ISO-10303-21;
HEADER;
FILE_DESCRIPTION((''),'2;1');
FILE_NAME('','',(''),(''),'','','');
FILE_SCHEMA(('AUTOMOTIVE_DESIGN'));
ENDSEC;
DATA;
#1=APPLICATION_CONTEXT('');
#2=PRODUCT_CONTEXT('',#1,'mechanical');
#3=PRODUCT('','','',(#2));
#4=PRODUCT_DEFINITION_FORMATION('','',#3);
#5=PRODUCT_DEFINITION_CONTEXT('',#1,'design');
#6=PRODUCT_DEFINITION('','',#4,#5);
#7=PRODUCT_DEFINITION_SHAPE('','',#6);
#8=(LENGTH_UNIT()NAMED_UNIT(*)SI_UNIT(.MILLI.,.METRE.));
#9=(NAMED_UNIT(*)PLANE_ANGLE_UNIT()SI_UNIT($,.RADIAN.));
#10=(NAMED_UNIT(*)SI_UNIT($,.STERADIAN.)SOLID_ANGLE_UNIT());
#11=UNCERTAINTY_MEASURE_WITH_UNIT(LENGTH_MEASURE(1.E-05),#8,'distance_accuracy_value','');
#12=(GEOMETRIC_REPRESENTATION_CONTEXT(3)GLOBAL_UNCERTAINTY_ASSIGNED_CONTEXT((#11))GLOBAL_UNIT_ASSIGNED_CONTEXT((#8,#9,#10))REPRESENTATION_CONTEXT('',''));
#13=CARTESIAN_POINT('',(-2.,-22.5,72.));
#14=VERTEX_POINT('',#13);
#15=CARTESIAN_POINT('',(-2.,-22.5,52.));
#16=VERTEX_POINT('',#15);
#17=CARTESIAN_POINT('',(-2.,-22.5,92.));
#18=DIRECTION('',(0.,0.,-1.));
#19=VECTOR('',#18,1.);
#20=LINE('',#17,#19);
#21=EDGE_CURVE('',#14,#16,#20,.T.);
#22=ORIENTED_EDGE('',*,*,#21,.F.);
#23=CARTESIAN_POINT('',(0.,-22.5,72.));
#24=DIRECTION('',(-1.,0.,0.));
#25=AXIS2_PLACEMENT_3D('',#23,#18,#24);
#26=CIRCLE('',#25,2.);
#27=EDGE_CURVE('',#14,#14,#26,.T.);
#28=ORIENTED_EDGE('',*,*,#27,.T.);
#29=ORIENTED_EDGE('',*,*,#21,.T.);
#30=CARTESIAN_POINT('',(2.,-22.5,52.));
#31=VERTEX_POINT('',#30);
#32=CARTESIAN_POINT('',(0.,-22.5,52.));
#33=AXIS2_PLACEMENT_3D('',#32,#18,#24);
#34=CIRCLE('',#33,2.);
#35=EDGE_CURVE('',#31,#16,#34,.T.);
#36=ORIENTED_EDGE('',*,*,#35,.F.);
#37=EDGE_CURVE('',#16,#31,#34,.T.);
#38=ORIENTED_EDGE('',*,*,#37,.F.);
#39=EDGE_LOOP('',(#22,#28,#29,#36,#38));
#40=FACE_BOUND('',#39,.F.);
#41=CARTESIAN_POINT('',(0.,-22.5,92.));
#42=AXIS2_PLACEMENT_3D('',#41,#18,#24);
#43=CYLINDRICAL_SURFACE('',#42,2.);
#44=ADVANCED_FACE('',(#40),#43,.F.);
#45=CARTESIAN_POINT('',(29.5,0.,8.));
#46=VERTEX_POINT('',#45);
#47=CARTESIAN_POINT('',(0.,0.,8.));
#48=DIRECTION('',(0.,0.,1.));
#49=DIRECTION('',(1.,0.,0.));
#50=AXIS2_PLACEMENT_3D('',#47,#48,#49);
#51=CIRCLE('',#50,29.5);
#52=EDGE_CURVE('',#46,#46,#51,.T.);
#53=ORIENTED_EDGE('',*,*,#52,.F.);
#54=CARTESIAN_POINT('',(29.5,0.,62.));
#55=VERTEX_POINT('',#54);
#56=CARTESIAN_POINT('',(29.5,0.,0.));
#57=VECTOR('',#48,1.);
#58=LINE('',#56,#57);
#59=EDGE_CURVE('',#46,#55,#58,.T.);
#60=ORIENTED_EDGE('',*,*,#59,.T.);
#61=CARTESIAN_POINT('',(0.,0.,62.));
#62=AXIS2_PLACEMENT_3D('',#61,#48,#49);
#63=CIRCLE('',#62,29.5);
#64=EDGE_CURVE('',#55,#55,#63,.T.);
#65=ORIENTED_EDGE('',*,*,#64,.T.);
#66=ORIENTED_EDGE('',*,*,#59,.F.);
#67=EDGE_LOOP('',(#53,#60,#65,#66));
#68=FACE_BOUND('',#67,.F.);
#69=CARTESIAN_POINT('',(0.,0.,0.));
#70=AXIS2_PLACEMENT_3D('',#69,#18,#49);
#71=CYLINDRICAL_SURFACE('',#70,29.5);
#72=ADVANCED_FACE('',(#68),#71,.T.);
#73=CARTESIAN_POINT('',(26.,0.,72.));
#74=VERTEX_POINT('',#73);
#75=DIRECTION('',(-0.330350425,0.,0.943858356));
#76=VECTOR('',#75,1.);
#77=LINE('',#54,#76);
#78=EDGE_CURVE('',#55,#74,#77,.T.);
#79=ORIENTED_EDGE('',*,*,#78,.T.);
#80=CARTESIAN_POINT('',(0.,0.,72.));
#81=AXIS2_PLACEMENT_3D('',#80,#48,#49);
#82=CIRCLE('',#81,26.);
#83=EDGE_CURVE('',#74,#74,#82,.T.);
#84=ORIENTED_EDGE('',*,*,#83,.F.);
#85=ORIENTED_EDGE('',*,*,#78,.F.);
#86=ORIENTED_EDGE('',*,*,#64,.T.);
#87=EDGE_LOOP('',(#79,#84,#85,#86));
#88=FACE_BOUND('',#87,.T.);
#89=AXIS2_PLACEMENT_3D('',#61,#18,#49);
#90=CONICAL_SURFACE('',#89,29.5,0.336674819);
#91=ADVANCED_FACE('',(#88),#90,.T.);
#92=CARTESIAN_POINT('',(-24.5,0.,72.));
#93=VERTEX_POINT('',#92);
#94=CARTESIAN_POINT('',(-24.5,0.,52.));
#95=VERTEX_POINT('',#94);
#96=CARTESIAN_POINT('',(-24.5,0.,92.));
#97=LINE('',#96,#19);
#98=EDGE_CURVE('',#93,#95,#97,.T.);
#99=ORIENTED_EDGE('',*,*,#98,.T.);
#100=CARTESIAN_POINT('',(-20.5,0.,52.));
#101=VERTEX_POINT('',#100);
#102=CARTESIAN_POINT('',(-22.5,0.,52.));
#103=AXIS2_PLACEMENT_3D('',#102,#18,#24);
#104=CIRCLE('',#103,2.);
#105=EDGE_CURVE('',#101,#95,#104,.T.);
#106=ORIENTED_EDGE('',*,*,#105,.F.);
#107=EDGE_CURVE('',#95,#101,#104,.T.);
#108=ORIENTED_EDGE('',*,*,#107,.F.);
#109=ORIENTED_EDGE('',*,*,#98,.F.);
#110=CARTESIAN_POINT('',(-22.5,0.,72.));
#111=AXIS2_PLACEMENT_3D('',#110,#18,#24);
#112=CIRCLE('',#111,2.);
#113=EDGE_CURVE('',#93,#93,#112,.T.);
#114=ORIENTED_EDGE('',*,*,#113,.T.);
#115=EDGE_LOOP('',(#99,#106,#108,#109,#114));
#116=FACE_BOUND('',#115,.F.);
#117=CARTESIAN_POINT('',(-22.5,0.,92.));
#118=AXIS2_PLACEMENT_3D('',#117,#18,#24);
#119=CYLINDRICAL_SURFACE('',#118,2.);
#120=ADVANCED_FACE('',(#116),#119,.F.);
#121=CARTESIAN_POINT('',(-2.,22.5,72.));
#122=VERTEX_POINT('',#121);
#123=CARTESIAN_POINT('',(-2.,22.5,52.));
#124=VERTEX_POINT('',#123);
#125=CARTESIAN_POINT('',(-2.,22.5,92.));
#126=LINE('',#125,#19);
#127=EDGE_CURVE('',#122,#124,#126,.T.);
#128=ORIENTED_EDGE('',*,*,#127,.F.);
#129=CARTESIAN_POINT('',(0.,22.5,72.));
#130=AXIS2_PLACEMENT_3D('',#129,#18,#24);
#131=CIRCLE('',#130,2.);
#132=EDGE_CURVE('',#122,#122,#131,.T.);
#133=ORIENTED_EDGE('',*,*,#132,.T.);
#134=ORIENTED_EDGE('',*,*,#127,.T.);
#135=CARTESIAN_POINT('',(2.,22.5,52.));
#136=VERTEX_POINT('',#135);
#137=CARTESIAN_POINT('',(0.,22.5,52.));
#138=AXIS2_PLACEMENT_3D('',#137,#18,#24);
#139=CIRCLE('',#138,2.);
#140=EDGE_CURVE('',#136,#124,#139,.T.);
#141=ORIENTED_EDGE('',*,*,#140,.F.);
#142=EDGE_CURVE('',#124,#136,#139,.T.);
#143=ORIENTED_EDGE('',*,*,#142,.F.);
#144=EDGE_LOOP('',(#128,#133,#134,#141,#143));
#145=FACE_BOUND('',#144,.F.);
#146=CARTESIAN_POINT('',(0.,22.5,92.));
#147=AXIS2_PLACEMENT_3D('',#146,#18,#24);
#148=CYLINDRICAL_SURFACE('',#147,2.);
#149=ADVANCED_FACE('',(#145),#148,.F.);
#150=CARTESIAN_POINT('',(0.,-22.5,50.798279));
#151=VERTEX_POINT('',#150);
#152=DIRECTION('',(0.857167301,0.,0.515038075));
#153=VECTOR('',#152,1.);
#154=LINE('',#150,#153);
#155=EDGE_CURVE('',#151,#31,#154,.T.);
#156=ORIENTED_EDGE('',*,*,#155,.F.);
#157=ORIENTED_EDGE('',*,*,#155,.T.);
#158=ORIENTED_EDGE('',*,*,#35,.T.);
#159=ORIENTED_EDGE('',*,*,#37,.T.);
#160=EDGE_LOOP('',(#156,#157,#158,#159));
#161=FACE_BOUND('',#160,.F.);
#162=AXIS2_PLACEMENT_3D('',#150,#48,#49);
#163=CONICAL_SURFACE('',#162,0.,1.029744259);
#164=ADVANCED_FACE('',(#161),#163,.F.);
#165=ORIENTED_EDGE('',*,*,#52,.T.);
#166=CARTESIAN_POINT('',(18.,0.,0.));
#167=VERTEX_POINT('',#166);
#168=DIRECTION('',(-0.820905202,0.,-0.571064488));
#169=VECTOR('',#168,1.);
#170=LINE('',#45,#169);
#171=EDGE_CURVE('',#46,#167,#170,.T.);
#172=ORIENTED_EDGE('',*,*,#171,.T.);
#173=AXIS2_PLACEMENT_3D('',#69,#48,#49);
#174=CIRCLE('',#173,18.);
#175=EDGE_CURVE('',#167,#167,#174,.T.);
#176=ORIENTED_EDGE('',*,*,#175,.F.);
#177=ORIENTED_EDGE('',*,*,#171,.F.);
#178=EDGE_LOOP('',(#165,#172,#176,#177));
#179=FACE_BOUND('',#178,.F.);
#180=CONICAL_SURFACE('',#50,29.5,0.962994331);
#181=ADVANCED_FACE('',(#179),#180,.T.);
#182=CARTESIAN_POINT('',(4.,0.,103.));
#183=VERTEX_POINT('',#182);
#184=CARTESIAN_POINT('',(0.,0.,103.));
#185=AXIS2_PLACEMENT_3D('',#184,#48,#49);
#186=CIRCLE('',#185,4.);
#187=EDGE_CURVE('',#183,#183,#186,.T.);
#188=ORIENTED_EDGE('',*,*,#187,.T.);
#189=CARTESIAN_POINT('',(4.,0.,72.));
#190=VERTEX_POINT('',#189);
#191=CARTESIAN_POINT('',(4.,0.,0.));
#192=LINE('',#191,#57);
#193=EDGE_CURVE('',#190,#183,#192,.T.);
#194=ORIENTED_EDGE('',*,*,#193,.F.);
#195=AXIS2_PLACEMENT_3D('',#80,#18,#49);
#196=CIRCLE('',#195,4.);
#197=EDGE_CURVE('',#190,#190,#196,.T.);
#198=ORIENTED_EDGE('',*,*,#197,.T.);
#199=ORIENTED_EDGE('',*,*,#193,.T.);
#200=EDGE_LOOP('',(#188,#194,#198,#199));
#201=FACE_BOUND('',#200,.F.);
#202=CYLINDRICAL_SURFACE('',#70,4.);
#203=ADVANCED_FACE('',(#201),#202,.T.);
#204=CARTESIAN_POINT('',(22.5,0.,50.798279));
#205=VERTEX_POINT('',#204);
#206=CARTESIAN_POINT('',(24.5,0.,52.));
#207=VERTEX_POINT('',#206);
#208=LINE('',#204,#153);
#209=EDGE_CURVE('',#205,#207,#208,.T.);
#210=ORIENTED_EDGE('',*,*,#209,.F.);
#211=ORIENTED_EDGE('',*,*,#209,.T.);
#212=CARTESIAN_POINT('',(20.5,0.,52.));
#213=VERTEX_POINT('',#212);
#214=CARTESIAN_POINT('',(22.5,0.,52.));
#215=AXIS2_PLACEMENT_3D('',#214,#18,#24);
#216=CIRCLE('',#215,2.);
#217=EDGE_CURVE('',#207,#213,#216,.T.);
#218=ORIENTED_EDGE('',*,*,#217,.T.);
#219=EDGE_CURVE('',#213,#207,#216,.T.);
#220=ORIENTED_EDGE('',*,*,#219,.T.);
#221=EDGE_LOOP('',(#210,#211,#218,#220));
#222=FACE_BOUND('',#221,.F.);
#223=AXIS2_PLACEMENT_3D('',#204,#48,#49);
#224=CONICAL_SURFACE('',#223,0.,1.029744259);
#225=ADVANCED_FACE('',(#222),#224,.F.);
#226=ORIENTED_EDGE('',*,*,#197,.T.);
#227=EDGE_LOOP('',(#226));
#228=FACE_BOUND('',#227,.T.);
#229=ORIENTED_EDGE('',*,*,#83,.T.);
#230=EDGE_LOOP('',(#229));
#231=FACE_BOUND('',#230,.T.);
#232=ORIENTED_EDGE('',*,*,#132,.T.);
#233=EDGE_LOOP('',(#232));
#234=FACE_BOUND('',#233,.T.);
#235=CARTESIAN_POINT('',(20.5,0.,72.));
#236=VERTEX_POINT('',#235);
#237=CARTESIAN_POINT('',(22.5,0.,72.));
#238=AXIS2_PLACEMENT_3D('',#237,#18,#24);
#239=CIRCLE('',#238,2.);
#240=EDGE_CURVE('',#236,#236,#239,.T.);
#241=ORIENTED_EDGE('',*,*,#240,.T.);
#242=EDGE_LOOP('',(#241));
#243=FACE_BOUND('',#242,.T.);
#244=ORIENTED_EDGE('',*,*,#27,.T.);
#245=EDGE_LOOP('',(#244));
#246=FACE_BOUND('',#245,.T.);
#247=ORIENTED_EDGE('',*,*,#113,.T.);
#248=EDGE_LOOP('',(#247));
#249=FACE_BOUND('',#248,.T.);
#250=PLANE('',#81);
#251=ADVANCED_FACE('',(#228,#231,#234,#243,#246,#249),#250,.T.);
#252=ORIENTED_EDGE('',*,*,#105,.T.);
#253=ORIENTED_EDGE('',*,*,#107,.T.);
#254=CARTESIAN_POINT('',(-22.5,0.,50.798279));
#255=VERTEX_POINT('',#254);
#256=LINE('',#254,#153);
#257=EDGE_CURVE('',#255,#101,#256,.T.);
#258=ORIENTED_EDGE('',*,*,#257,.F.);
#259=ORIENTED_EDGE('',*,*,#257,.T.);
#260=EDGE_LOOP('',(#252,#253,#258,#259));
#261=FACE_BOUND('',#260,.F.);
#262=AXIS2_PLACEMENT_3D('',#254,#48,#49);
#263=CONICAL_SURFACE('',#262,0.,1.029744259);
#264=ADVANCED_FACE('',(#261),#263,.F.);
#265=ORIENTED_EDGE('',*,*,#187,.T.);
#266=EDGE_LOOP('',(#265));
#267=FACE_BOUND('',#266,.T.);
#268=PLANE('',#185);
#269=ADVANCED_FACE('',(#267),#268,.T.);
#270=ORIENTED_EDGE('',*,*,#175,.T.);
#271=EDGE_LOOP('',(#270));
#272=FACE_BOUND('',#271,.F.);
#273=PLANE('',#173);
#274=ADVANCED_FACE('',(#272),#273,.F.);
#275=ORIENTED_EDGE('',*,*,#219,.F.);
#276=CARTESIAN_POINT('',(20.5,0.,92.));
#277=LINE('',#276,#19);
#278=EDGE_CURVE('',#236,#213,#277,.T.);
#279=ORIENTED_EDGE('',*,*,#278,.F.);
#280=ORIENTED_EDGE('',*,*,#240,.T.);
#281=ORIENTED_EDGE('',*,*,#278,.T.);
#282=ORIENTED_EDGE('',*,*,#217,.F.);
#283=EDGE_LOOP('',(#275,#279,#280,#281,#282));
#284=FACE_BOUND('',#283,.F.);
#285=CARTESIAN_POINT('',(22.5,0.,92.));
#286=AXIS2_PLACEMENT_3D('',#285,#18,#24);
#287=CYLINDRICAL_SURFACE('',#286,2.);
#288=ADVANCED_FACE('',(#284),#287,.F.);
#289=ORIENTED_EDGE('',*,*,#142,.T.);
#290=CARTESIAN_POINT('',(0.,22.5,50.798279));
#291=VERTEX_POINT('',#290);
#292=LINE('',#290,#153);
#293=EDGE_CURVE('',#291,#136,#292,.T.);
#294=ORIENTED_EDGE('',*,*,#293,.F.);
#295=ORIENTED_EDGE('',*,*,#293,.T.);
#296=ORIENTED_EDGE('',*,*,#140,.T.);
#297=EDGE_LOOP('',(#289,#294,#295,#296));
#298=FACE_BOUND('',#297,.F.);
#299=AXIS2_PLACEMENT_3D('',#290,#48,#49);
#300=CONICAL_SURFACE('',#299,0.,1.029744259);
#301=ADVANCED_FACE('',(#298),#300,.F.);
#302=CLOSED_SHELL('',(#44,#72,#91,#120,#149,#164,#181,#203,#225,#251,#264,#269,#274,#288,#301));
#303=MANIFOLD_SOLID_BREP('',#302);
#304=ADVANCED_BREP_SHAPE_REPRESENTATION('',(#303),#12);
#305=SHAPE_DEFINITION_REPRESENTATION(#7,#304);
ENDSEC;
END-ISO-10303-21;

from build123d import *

# Parameters (mm, degrees)
F0_R     = 29.5
F1_DEPTH = 72
F3_SIZE2 = 11.5
F3_SIZE  = 8
F4_R     = 4
F5_DEPTH = 103
F7_D     = 4
F7_DEPTH = 20
F7_TIP   = 1.2017212381


# Not quite as in the source:
# - a fillet or chamfer that OpenCascade refuses, or shapes differently, is made with other operations: its cross-section is extruded or revolved along the edge and cut away or added


with BuildPart() as f1:
    # F0 (on Top) → F1 (new body)
    with BuildSketch(Plane.XY):
        Circle(F0_R)
    extrude(amount=F1_DEPTH)

    # F2: chamfer of 3.5 x 10 on 1 edges, made by hand

    # F2_s1 → F2_t2 (revolve, cut)
    with BuildSketch(Plane.XZ):
        Polygon((29.5, 62), (26, 72), (29.5, 72), align=None)
    revolve(axis=Axis((0, 0, 72), (0, 0, 1)), mode=Mode.SUBTRACT)

    # F3
    f3_edges = [f1.edges().sort_by_distance(p)[0] for p in [
        (-29.5, 0, 0),
    ]]
    chamfer(f3_edges, length=F3_SIZE, length2=F3_SIZE2)

    # F4 (on Top) → F5 (join)
    with BuildSketch(Plane.XY):
        Circle(F4_R)
    extrude(amount=F5_DEPTH)

    # F7
    with Locations(Plane.XY.offset(72)):
        with Locations((0, 22.5), (22.5, 0), (0, -22.5), (-22.5, 0)):
            Hole(F7_D / 2, depth=F7_DEPTH)
            with Locations((0, 0, -(F7_DEPTH + F7_TIP / 2))):  # 118° drill point
                Cone(0, F7_D / 2, F7_TIP, mode=Mode.SUBTRACT)


solid = f1.part
